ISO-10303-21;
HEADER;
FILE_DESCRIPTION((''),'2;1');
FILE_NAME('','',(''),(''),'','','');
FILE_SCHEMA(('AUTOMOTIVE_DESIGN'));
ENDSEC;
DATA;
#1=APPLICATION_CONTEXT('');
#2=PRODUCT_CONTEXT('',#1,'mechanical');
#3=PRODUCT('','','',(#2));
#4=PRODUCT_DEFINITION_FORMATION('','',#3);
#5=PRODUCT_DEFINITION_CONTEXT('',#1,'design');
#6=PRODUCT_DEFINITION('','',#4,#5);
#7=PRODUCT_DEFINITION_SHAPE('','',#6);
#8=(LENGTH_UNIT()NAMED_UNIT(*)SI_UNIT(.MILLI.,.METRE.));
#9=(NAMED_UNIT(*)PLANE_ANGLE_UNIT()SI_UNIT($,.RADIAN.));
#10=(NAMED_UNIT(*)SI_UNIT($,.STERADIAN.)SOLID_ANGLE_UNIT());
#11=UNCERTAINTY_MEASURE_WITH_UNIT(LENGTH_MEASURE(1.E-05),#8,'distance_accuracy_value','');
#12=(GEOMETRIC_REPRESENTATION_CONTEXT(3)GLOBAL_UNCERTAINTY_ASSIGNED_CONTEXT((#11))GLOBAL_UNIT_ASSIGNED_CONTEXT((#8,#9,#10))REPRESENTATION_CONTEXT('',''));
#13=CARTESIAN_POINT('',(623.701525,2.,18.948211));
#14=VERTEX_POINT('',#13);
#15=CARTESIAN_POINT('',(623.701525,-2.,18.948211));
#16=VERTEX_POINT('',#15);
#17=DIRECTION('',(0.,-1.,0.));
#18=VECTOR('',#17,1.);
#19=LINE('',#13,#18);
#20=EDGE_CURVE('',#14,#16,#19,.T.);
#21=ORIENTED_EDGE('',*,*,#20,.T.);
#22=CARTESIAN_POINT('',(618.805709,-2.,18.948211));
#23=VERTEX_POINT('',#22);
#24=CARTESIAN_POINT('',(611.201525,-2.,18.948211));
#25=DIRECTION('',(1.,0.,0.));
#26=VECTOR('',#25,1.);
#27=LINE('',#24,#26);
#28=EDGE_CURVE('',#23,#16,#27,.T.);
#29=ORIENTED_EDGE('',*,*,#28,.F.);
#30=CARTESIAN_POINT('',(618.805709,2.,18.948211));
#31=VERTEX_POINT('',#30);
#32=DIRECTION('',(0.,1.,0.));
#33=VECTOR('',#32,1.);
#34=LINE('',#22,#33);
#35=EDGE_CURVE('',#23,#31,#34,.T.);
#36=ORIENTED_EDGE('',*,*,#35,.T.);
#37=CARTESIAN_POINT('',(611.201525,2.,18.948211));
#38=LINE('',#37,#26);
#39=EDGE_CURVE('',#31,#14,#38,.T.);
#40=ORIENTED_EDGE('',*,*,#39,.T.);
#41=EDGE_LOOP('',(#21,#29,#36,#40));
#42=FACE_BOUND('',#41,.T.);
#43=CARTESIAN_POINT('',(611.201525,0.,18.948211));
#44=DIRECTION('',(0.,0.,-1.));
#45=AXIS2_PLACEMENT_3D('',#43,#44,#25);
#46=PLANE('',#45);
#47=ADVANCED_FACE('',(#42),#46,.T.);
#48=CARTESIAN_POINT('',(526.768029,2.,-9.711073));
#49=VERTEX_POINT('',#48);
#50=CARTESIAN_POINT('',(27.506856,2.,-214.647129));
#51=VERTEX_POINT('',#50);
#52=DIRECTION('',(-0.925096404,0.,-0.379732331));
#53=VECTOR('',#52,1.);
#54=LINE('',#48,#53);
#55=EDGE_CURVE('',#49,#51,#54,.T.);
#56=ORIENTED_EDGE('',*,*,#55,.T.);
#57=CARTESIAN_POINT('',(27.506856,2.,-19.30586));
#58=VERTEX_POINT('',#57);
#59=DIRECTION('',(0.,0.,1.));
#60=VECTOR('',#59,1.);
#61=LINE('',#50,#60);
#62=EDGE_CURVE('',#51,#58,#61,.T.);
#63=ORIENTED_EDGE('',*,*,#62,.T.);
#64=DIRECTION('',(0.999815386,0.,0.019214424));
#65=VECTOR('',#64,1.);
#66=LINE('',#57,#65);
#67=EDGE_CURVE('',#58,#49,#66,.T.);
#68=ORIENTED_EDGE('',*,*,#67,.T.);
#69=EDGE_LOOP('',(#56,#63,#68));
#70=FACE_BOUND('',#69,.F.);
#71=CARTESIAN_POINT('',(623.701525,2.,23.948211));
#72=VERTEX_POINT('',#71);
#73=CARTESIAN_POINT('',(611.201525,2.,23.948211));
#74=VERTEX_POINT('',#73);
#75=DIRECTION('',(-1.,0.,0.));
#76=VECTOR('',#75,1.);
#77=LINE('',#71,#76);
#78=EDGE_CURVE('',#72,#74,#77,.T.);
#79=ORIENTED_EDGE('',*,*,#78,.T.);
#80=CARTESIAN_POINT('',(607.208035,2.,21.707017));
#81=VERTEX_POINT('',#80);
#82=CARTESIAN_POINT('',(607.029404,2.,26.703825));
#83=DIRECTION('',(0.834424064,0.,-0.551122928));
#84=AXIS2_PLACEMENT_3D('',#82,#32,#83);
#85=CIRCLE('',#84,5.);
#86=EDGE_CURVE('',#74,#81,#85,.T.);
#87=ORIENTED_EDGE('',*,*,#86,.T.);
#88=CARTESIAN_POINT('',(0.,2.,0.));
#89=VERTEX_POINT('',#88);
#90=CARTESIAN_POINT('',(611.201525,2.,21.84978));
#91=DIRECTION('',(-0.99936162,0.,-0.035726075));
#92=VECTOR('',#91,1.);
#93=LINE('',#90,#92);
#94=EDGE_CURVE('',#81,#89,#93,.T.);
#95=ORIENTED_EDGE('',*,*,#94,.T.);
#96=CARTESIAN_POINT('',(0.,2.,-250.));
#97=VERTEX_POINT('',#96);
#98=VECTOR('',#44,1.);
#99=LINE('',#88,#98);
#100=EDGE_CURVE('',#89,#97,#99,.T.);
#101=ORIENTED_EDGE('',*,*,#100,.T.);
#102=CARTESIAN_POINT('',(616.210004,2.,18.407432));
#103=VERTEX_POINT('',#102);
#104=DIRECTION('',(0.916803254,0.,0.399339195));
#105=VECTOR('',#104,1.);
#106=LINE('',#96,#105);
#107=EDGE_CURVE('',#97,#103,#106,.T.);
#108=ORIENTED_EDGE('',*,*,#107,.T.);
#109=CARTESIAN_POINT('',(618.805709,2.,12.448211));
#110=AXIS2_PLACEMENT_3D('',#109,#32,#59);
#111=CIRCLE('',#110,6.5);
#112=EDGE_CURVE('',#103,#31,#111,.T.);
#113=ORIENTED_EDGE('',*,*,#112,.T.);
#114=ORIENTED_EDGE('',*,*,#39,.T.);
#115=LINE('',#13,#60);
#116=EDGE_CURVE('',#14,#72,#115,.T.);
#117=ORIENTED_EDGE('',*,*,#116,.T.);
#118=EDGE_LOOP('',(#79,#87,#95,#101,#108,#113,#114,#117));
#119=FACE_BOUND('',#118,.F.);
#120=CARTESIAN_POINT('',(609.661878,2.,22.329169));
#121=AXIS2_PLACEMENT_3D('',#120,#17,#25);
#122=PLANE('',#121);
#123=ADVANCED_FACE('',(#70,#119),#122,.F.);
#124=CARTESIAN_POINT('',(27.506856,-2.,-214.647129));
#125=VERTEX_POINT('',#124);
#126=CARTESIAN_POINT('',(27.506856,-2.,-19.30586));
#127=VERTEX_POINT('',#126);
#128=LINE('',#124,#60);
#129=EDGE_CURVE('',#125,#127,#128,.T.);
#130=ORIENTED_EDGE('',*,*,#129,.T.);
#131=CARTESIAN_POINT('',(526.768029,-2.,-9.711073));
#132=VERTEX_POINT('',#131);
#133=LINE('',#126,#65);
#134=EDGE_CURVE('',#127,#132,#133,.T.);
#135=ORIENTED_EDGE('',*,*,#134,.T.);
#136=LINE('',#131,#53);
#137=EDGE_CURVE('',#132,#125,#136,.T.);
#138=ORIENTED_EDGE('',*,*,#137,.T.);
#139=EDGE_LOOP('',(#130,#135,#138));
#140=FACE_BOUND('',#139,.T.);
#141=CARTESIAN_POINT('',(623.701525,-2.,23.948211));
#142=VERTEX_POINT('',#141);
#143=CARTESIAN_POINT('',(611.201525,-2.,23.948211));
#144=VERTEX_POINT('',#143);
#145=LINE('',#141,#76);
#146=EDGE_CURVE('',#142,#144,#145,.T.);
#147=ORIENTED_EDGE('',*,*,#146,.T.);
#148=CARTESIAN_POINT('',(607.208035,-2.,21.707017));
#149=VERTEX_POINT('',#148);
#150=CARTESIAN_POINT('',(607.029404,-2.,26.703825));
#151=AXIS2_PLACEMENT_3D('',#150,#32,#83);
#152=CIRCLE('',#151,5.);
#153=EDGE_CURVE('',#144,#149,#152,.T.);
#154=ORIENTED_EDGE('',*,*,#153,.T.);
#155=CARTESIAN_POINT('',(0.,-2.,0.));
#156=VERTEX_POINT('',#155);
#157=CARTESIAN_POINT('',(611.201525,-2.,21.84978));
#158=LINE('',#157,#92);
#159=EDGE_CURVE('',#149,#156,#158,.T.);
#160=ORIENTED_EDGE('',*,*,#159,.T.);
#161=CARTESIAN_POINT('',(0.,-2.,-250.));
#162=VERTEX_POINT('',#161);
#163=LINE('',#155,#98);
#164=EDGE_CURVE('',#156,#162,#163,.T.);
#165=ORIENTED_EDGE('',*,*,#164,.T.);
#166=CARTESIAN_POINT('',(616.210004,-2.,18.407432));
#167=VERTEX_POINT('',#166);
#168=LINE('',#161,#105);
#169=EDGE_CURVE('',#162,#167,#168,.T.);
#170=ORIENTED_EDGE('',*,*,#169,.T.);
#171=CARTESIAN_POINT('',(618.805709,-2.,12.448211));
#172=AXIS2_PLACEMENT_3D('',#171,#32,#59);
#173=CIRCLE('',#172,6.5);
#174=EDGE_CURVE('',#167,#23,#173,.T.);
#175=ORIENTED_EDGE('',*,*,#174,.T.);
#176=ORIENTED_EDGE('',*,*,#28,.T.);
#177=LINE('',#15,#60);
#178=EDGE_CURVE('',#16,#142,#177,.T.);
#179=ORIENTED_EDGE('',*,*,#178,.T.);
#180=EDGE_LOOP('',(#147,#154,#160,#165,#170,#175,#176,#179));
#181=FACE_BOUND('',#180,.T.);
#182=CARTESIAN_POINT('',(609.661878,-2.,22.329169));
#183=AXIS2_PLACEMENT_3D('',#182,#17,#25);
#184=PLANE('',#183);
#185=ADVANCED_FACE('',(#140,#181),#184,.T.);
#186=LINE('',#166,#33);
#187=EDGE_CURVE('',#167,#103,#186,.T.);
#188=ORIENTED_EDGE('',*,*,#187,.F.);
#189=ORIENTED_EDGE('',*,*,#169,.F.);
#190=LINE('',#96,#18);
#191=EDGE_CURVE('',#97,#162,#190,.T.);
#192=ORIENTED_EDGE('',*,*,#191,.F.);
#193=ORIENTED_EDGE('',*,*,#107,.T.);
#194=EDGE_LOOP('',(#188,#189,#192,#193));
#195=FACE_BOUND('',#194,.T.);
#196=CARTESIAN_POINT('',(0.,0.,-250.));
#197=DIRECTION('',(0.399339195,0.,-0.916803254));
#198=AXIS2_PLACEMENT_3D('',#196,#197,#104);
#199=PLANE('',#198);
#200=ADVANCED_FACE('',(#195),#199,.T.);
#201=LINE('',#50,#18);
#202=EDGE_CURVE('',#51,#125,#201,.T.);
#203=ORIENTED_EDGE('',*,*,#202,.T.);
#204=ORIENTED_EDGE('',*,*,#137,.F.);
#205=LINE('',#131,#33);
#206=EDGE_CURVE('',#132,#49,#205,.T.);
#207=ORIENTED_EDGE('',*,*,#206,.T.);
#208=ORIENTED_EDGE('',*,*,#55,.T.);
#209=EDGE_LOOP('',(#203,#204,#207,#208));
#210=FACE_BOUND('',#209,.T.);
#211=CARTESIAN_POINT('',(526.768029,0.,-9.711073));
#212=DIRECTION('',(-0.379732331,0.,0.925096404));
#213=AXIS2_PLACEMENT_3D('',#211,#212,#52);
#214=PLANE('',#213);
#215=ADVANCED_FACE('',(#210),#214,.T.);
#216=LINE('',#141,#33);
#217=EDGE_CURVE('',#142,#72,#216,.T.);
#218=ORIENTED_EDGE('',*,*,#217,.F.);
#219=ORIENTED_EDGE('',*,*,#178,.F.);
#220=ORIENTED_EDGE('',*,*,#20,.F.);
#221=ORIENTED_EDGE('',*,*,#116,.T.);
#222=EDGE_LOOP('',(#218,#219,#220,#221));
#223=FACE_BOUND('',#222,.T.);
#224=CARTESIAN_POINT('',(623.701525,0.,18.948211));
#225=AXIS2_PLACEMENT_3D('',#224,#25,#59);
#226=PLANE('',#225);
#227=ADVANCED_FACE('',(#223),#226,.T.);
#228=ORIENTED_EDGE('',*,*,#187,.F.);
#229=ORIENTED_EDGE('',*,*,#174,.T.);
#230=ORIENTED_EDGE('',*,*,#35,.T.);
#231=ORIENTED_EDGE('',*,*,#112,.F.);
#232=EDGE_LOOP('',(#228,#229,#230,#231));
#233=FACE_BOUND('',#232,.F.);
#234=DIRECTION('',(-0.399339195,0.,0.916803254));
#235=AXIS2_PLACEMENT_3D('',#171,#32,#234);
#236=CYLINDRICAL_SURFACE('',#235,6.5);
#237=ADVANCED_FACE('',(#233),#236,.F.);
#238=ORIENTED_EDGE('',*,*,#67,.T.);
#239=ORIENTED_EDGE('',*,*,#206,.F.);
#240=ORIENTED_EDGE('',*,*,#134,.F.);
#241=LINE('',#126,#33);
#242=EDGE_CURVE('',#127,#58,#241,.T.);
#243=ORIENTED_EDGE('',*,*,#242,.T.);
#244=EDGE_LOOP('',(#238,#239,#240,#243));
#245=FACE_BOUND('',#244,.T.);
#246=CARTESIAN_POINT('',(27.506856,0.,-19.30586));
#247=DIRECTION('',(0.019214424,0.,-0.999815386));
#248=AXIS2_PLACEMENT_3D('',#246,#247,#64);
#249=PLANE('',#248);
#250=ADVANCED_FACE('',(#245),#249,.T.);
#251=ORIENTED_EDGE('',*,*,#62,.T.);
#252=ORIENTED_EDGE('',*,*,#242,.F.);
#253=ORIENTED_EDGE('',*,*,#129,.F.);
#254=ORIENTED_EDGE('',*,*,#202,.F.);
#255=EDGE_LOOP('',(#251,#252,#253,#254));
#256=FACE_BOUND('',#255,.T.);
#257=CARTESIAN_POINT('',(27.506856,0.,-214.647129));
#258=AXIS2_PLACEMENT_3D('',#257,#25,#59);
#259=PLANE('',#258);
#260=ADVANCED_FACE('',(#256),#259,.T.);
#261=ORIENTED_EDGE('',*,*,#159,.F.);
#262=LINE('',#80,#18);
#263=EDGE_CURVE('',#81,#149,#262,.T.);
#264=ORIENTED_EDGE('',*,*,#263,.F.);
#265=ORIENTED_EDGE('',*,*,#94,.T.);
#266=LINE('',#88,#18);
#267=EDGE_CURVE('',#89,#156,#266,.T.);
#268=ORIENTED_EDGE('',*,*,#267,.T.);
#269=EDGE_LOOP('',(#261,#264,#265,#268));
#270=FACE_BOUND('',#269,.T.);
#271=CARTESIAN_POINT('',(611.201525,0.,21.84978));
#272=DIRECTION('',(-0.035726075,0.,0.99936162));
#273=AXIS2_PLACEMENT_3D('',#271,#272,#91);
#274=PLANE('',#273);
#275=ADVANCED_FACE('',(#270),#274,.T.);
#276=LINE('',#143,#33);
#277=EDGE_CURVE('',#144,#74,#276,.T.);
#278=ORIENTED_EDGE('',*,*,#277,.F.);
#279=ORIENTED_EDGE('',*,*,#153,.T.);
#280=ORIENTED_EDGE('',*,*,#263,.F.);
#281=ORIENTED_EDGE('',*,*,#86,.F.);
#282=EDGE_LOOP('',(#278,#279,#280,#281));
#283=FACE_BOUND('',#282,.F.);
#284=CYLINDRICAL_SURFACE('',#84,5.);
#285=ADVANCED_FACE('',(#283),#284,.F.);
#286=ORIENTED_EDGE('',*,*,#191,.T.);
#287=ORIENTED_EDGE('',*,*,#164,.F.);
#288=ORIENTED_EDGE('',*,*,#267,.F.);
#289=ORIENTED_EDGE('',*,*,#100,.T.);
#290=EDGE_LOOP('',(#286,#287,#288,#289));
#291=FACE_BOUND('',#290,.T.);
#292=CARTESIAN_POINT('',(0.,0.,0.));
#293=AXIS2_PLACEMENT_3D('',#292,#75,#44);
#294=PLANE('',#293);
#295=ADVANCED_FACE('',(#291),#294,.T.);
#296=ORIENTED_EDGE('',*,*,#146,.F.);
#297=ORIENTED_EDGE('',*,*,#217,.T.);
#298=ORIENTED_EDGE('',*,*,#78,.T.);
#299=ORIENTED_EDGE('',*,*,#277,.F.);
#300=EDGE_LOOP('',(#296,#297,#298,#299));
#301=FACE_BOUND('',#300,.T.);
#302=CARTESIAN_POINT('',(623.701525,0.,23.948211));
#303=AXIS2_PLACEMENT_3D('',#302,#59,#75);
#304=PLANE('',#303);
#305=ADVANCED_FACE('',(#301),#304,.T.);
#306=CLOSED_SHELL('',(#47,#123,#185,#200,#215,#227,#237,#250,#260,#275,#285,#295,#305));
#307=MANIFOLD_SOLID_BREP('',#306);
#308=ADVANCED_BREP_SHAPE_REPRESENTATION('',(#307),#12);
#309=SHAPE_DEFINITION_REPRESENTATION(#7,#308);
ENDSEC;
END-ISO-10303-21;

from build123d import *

# Parameters (mm, degrees)
F1_DEPTH    = 2
F2_DEPTH    = 2
F3_DEPTH    = 2
F4_DEPTH    = 2
F5_T1_DEPTH = 4
F6_R        = 6.5


# Not quite as in the source:
# - a fillet or chamfer that OpenCascade refuses, or shapes differently, is made with other operations: its cross-section is extruded or revolved along the edge and cut away or added


with BuildPart() as f1:
    # F0 (on Front) → F1 (new body)
    with BuildSketch(Plane.XZ):
        Polygon((611.2015247345, 21.8497800332), (0, 0), (0, -250), (617.4515247345, 18.9482106362), (611.2015247345, 18.9482106362), align=None)
        Polygon((27.5068562478, -214.647129178), (27.5068562478, -19.3058601132), (526.7680287361, -9.7110727802), align=None, mode=Mode.SUBTRACT)
    extrude(amount=F1_DEPTH)

    # F0 (on Front) → F2 (join)
    with BuildSketch(Plane.XZ):
        Polygon((611.2015247345, 21.8497800332), (0, 0), (0, -250), (617.4515247345, 18.9482106362), (611.2015247345, 18.9482106362), align=None)
        Polygon((27.5068562478, -214.647129178), (27.5068562478, -19.3058601132), (526.7680287361, -9.7110727802), align=None, mode=Mode.SUBTRACT)
    extrude(amount=-F2_DEPTH)

    # F0 (on Front) → F3 (join)
    with BuildSketch(Plane.XZ):
        Polygon((611.2015247345, 23.9482106362), (611.2015247345, 21.8497800332), (611.2015247345, 18.9482106362), (617.4515247345, 18.9482106362), (623.7015247345, 18.9482106362), (623.7015247345, 23.9482106362), align=None)
    extrude(amount=F3_DEPTH)

    # F0 (on Front) → F4 (join)
    with BuildSketch(Plane.XZ):
        Polygon((611.2015247345, 23.9482106362), (611.2015247345, 21.8497800332), (611.2015247345, 18.9482106362), (617.4515247345, 18.9482106362), (623.7015247345, 18.9482106362), (623.7015247345, 23.9482106362), align=None)
    extrude(amount=-F4_DEPTH)

    # F5: fillet of radius 5 on 1 edges, made by hand

    # F5_s2 → F5_t1 (join)
    with BuildSketch(Plane.XZ.offset(-2)):
        with BuildLine():
            ThreePointArc((611.2015247345, 23.9482106362), (609.476442407, 22.3435494733), (607.20803479, 21.7070171746))
            Line((607.20803479, 21.7070171746), (611.2015247345, 21.8497800332))
            Line((611.2015247345, 21.8497800332), (611.2015247345, 23.9482106362))
        make_face()
    extrude(amount=F5_T1_DEPTH)

    # F6
    f6_edges = [f1.edges().sort_by_distance(p)[0] for p in [
        (617.451525, 0, 18.948211),
    ]]
    fillet(f6_edges, radius=F6_R)


solid = f1.part
